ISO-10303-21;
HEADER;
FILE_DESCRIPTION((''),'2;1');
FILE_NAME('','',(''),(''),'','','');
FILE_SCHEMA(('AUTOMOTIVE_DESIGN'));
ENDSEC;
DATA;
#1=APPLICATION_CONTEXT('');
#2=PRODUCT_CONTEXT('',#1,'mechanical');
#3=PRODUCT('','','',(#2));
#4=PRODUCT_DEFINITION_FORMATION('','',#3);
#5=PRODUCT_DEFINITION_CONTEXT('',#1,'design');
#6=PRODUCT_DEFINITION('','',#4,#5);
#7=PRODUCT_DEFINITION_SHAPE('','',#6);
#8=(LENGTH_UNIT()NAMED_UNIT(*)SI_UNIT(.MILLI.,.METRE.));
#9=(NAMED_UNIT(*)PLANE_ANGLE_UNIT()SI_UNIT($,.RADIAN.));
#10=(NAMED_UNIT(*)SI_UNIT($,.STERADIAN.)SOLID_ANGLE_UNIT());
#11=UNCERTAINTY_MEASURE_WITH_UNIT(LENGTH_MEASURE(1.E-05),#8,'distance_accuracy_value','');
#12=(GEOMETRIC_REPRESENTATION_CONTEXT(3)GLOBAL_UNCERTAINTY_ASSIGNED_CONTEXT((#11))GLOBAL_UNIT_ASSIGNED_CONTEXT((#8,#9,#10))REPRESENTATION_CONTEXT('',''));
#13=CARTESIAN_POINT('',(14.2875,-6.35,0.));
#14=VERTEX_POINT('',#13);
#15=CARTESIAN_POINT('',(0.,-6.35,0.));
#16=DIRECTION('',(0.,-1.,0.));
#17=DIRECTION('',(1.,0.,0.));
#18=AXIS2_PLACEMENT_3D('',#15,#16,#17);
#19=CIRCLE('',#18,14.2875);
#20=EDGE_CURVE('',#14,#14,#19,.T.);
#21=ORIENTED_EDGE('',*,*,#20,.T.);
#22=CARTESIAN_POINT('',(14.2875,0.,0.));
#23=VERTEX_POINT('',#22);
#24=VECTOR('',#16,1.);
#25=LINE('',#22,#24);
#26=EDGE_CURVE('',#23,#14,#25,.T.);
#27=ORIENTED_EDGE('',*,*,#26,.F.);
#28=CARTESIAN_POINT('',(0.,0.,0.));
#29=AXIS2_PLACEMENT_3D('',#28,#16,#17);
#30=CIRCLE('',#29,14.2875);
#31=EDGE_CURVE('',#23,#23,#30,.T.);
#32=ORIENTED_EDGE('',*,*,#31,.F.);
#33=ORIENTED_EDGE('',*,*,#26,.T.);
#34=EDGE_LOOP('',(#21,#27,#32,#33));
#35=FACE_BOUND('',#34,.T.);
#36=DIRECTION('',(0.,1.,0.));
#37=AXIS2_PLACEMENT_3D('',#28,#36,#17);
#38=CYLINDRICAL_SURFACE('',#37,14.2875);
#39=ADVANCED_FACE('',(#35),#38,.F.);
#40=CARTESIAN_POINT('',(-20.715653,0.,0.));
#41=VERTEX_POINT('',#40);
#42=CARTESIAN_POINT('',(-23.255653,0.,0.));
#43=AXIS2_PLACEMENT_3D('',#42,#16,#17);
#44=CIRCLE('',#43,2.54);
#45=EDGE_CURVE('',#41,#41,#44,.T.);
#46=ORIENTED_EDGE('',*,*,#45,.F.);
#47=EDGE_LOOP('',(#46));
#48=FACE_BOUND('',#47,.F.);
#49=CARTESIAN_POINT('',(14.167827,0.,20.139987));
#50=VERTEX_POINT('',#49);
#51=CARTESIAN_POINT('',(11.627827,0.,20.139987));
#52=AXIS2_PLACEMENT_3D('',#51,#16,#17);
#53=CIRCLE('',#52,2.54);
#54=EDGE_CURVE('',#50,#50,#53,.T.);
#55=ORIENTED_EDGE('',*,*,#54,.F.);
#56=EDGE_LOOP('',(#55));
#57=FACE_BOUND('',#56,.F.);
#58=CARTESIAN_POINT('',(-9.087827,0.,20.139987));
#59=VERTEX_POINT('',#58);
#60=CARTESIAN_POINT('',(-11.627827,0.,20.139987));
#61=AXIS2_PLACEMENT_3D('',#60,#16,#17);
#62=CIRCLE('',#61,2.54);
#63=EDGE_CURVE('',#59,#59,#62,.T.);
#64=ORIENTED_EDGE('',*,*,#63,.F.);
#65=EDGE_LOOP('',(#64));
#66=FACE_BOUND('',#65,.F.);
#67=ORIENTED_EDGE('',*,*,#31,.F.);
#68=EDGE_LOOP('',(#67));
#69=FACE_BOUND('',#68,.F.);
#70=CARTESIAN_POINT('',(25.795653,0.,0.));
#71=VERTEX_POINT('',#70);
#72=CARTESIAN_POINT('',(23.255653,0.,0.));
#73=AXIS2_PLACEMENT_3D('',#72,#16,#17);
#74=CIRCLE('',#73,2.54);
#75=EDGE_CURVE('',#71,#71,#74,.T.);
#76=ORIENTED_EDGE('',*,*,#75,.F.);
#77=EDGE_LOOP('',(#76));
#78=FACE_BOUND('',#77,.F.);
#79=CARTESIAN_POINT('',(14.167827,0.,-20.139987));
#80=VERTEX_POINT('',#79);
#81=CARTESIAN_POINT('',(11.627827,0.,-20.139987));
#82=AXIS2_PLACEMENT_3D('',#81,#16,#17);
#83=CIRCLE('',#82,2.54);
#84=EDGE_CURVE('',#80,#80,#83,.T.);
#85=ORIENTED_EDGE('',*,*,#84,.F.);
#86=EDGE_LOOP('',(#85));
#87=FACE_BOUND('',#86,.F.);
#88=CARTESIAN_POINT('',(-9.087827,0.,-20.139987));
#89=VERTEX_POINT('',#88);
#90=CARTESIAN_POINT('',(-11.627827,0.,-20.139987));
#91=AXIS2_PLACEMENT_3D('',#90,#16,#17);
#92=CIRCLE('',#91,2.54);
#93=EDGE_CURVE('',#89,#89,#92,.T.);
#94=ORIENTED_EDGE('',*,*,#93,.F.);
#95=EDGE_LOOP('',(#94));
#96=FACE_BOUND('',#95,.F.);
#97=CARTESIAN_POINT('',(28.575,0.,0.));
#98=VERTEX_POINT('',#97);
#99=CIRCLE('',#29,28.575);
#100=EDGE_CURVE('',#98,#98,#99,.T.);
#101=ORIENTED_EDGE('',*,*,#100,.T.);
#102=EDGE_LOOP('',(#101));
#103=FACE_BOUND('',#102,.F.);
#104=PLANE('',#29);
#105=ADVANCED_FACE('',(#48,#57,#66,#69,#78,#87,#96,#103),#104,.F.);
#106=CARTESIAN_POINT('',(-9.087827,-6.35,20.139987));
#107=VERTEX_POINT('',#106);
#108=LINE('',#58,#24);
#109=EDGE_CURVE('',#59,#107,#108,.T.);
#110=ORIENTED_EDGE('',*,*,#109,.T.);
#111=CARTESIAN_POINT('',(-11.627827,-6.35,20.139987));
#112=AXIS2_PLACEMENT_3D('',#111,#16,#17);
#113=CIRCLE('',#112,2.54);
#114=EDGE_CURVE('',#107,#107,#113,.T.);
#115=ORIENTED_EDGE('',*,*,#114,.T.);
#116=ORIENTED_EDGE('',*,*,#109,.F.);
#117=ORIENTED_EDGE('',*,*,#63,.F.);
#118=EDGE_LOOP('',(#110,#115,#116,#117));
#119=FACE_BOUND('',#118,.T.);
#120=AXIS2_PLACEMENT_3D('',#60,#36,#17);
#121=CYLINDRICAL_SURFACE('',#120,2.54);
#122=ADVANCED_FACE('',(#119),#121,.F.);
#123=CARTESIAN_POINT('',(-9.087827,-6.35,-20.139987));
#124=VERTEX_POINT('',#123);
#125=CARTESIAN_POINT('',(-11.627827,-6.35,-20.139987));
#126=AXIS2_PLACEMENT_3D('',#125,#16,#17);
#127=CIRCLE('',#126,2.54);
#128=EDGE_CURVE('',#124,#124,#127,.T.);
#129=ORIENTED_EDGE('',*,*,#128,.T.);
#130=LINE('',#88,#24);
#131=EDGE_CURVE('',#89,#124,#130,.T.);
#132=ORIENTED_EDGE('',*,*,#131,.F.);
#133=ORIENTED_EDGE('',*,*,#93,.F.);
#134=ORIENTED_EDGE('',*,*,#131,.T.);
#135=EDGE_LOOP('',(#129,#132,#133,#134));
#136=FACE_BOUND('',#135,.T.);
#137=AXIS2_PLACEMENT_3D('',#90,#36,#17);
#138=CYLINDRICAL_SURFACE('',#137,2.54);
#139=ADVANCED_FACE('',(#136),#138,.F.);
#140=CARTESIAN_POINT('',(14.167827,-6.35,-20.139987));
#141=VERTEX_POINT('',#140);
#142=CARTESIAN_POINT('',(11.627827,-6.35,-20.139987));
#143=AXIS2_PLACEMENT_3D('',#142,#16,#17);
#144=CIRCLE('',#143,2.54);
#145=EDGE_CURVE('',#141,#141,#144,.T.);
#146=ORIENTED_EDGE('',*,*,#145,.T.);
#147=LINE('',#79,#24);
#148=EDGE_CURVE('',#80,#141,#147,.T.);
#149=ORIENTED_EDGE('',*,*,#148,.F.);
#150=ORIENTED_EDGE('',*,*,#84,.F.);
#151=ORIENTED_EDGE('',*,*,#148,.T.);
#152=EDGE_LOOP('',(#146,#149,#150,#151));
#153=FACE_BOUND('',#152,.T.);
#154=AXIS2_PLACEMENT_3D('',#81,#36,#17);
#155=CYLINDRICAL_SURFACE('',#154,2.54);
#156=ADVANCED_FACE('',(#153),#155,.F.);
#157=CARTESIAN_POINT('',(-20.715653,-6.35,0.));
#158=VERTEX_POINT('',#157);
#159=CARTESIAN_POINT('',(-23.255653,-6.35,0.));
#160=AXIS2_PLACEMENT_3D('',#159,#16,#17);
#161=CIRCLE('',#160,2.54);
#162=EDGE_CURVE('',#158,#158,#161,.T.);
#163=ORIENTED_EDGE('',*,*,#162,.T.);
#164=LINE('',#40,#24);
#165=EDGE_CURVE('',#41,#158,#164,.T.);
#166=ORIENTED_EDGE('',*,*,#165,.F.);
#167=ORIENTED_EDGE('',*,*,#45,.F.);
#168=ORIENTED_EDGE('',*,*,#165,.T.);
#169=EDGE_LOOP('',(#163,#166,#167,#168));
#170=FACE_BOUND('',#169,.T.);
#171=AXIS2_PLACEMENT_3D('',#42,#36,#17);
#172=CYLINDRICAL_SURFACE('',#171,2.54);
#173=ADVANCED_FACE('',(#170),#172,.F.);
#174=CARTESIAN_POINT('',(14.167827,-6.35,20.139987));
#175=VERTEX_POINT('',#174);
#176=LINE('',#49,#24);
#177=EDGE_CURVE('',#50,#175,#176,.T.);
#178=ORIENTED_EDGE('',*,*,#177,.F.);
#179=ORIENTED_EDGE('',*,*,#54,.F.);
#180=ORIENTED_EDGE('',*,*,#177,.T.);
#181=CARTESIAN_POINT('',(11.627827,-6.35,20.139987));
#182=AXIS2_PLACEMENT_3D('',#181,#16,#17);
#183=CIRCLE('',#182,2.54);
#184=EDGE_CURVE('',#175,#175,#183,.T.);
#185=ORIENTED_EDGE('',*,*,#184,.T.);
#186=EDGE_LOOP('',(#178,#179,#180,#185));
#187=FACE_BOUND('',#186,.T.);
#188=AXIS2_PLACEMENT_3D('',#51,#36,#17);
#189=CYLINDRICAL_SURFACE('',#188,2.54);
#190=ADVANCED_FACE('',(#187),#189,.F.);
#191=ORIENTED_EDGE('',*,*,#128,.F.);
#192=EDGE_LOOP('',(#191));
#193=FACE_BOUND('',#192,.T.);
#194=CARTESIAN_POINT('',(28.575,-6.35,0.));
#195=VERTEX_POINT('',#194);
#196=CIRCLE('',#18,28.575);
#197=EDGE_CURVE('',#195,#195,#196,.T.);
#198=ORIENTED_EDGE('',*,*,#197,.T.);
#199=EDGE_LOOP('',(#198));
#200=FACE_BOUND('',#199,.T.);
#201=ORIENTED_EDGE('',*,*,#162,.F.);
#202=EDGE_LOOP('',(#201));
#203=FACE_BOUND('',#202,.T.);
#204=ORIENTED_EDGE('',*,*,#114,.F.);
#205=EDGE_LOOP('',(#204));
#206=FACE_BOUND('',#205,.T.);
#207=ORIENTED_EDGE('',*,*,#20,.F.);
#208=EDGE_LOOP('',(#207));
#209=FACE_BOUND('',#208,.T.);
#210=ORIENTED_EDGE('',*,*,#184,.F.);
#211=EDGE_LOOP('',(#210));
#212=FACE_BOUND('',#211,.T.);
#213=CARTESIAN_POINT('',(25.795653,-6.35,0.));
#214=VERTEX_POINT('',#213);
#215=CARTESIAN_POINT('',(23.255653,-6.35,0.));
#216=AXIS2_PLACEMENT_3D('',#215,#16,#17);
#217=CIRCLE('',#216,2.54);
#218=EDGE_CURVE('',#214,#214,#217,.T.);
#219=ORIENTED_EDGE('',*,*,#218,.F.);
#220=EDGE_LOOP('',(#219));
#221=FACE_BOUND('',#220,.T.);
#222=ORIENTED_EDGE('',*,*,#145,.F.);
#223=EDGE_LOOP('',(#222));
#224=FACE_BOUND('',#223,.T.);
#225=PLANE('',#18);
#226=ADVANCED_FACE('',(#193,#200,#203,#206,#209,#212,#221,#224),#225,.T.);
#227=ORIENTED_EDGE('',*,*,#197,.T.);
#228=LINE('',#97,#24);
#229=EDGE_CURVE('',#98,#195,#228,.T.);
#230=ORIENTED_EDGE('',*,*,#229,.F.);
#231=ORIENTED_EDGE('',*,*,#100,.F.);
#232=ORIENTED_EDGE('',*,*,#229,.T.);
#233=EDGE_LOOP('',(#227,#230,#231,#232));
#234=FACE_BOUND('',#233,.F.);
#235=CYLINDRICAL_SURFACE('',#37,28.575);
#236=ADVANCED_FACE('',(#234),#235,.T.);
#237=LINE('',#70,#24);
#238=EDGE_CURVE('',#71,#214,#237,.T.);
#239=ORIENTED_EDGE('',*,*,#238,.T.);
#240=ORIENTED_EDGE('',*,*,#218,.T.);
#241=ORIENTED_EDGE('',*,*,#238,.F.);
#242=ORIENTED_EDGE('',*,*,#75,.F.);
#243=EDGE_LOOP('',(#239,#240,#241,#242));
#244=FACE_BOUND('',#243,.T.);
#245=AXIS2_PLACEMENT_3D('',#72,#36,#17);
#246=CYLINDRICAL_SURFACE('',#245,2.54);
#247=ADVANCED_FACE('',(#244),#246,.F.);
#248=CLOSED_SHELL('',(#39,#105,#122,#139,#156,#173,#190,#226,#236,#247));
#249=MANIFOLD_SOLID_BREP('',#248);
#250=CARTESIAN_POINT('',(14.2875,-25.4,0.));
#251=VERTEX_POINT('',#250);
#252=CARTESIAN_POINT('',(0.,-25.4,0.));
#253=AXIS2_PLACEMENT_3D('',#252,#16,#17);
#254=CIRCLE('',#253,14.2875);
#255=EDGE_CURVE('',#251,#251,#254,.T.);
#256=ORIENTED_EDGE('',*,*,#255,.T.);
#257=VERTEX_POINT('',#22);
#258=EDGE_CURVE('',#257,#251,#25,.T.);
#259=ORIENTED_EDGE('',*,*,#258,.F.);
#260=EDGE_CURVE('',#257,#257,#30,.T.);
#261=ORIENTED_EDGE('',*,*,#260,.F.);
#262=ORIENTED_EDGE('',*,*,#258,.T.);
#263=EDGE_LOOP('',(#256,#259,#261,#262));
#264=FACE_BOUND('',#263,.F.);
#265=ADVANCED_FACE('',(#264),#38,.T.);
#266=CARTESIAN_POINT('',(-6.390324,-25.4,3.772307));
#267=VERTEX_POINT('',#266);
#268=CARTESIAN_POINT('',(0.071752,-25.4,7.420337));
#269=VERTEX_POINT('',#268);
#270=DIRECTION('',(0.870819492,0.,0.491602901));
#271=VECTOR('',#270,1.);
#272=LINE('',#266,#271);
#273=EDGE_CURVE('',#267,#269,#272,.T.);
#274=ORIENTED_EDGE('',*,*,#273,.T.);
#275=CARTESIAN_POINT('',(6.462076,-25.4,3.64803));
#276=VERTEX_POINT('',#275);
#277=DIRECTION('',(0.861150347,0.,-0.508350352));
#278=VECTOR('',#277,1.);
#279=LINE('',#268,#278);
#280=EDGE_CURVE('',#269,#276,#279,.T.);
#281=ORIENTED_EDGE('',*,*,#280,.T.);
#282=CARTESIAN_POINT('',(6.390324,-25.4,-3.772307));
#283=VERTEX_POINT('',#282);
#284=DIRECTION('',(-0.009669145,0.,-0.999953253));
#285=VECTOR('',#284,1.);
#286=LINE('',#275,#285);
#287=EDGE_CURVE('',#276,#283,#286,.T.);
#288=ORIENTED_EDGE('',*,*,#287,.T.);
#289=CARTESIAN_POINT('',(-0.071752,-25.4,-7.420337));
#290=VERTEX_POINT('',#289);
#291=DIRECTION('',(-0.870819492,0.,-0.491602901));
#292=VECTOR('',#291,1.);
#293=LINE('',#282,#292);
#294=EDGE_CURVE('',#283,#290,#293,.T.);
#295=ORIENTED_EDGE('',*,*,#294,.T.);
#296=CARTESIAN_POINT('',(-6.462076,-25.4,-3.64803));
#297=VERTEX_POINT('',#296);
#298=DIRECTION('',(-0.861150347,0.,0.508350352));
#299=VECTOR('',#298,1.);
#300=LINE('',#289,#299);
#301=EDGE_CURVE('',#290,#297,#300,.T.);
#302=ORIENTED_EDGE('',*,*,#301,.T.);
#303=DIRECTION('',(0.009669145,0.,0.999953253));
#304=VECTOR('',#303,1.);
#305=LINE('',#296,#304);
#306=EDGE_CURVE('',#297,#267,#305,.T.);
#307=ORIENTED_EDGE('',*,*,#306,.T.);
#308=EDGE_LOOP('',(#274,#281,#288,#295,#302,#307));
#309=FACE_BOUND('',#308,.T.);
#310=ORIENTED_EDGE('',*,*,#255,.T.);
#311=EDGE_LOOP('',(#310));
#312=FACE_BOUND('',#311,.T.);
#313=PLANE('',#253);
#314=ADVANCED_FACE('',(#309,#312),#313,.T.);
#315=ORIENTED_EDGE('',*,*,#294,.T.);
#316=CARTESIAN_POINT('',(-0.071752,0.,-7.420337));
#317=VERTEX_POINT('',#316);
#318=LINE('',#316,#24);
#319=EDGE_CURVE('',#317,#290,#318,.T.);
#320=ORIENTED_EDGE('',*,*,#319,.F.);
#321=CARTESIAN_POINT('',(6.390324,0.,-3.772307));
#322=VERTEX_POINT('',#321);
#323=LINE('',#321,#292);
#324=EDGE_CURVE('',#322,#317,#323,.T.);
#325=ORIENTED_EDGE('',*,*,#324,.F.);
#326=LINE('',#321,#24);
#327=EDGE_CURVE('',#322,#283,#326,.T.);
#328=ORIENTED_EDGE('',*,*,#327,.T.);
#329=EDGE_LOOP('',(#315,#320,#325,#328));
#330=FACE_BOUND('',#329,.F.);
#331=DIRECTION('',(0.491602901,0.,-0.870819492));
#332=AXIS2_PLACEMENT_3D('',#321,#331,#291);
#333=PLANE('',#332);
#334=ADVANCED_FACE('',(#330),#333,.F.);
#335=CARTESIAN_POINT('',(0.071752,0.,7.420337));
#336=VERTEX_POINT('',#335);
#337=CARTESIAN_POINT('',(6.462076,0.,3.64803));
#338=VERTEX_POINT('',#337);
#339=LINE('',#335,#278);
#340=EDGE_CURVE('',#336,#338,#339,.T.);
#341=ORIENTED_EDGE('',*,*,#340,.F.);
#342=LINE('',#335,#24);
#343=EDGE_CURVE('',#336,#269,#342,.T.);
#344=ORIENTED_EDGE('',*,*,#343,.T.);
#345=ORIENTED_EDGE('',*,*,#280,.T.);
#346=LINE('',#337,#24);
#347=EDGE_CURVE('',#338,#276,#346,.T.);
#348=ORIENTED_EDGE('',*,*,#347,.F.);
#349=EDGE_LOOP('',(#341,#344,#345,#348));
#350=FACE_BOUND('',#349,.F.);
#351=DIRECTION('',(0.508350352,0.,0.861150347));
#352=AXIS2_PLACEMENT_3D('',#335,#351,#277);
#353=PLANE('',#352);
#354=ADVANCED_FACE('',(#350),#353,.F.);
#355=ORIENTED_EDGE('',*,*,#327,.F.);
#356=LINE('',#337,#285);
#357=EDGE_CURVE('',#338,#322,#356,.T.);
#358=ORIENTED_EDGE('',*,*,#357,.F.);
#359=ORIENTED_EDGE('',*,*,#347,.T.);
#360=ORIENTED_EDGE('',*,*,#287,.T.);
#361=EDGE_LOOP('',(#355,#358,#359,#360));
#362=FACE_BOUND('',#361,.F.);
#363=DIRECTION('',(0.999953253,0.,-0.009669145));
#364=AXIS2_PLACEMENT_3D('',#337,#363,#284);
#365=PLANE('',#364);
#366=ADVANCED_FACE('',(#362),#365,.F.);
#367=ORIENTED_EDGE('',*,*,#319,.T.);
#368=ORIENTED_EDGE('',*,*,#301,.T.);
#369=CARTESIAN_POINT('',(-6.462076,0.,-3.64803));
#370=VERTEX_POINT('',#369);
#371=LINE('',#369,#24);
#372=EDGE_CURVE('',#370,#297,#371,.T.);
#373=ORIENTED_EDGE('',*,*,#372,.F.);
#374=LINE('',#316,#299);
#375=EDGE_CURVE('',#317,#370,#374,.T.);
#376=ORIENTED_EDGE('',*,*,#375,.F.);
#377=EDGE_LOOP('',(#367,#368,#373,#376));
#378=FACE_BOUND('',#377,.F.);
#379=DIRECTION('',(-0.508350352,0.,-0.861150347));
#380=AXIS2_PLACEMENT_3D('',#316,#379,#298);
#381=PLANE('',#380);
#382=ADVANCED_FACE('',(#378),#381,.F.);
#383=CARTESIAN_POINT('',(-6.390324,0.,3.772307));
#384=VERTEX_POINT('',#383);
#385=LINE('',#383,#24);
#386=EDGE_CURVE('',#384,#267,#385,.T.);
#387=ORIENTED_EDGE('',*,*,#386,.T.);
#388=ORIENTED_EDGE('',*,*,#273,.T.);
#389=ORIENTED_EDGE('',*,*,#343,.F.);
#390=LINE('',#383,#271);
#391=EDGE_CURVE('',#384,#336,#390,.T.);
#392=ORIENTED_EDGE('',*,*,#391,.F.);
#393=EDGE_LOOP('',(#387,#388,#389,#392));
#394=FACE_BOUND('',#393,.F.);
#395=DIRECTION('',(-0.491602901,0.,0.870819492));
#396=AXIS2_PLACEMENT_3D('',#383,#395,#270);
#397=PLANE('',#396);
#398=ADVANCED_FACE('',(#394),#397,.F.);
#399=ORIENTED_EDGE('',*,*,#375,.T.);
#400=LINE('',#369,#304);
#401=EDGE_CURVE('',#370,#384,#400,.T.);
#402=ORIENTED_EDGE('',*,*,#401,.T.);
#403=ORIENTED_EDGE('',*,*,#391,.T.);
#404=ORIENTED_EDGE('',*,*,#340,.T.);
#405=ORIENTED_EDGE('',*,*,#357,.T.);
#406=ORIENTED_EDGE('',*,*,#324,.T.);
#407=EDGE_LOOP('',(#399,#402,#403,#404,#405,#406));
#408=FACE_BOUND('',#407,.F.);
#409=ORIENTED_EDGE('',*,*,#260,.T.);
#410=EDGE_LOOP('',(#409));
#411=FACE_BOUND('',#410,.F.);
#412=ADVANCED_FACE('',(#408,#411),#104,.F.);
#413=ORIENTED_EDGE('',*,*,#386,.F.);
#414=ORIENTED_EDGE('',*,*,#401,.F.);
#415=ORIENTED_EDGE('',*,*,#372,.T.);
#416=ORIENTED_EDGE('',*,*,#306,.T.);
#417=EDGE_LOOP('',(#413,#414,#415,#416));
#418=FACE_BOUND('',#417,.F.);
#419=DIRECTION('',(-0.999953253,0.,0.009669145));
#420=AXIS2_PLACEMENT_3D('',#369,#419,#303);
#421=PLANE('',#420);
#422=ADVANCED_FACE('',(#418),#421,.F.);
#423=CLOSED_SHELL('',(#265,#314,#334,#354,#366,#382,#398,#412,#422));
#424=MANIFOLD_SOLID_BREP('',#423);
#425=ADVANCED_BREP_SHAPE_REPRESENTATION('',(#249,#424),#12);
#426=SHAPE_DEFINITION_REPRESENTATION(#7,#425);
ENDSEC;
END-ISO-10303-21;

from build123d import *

# Parameters (mm, degrees)
F0_R     = 14.2875
F1_DEPTH = 25.4
F0_R_2   = 28.575
F0_R_3   = 2.54
F2_DEPTH = 6.35


# Not quite as in the source:
# - the program builds the solid bodies; features that only make, move or delete a surface that nothing else refers to are left out


with BuildPart() as f1:
    # F0 (on Front) → F1 (new body)
    with BuildSketch(Plane.XZ):
        Circle(F0_R)
        Polygon((-6.4620758334, -3.6480295337), (-6.3903241666, 3.772307066), (0.0717516667, 7.4203365997), (6.4620758334, 3.6480295337), (6.3903241666, -3.772307066), (-0.0717516667, -7.4203365997), align=None, mode=Mode.SUBTRACT)
    extrude(amount=F1_DEPTH)


with BuildPart() as f2:
    # F0 (on Front) → F2 (new body)
    with BuildSketch(Plane.XZ):
        Circle(F0_R_2)
        with Locations((-11.6278267134, -20.1399866492)):
            Circle(F0_R_3, mode=Mode.SUBTRACT)
        with Locations((11.6278267134, -20.1399866492)):
            Circle(F0_R_3, mode=Mode.SUBTRACT)
        with Locations((-23.2556534267, 0)):
            Circle(F0_R_3, mode=Mode.SUBTRACT)
        with Locations((-11.6278267134, 20.1399866492)):
            Circle(F0_R_3, mode=Mode.SUBTRACT)
        Circle(F0_R, mode=Mode.SUBTRACT)
        with Locations((23.2556534267, 0)):
            Circle(F0_R_3, mode=Mode.SUBTRACT)
        with Locations((11.6278267134, 20.1399866492)):
            Circle(F0_R_3, mode=Mode.SUBTRACT)
    extrude(amount=F2_DEPTH)


solid = Compound([f1.part, f2.part])
